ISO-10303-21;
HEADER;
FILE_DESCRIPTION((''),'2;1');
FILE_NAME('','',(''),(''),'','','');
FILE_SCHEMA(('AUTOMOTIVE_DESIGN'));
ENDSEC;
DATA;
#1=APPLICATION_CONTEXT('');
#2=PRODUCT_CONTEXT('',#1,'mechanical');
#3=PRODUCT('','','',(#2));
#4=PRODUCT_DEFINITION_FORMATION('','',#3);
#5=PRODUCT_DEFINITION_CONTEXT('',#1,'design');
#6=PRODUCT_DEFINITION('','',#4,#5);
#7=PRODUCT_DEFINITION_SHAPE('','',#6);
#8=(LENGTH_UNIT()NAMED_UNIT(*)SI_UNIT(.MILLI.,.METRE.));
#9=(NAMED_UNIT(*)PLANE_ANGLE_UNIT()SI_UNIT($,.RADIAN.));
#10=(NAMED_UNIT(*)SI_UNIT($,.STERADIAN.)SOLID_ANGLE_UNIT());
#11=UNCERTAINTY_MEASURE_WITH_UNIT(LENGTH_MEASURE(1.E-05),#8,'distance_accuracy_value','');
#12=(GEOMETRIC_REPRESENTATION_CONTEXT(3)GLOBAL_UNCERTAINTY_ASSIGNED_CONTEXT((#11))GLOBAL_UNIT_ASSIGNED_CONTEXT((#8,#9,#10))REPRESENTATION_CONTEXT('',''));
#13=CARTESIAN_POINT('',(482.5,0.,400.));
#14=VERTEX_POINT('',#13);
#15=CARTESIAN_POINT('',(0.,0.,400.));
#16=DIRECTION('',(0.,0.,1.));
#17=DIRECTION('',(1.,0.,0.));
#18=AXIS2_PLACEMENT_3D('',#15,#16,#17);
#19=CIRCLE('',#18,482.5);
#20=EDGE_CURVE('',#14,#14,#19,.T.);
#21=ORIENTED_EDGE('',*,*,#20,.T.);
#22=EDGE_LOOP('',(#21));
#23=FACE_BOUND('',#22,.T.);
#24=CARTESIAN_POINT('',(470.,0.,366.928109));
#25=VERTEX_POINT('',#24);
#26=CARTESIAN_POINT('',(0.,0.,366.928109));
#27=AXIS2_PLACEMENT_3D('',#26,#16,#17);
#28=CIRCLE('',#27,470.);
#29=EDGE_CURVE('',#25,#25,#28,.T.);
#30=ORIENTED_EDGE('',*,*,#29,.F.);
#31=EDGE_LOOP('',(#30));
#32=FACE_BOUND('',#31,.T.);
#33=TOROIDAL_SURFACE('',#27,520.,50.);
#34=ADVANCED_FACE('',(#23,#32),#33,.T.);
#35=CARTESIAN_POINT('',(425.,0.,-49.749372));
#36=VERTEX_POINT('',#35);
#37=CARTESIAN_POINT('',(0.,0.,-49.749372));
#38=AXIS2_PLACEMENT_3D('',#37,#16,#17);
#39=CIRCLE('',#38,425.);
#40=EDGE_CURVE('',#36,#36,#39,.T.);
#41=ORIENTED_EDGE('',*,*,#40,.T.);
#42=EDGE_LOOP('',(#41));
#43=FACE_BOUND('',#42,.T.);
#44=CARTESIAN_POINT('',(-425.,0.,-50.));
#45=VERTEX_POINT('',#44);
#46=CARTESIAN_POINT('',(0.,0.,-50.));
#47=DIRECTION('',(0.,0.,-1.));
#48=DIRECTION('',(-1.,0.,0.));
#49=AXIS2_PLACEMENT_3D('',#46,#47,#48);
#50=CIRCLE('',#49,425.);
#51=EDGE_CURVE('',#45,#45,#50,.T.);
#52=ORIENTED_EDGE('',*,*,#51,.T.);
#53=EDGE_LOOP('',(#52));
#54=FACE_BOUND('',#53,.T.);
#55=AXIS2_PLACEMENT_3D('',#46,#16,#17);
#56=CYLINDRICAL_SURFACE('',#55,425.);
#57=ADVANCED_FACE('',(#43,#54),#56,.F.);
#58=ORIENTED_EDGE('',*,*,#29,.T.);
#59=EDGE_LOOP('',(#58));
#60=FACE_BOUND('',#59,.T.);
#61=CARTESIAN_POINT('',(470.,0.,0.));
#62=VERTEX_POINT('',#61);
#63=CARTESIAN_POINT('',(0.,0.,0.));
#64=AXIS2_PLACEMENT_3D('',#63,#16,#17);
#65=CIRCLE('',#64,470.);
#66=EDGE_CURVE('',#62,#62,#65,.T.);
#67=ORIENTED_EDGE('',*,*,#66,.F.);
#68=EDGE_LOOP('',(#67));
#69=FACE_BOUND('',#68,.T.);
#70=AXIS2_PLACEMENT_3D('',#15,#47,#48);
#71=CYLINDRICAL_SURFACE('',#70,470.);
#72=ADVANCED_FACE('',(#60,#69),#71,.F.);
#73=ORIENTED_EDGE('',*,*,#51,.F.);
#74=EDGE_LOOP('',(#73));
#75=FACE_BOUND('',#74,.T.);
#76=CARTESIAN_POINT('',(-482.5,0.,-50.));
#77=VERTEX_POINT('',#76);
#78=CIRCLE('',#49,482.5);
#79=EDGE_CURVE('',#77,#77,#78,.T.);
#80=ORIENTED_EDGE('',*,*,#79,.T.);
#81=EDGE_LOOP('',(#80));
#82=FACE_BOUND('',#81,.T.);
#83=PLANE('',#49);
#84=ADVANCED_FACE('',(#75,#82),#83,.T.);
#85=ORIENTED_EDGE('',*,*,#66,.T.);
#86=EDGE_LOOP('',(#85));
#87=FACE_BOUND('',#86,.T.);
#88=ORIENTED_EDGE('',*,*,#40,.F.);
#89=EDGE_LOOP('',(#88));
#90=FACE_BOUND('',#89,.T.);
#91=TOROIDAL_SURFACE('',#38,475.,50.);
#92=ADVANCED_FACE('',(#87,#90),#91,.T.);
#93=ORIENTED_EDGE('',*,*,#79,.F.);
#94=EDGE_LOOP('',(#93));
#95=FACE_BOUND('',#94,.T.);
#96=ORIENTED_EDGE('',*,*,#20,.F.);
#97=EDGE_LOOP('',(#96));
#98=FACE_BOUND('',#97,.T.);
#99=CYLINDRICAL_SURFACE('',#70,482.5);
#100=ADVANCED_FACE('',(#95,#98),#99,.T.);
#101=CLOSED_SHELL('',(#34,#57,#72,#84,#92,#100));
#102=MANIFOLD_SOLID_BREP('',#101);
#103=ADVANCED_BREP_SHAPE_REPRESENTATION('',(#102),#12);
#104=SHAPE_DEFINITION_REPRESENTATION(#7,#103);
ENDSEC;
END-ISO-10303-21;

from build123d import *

# Parameters (mm, degrees)
CROQUIS1_R              = 482.5
CROQUIS1_R_2            = 470
SALIENTE_EXTRUIR1_DEPTH = 400
REDONDEO1_R             = 50
SALIENTE_EXTRUIR2_START = 50
CROQUIS2_R              = 482.5
CROQUIS2_R_2            = 425
SALIENTE_EXTRUIR2_DEPTH = 50
REDONDEO3_R             = 50


with BuildPart() as part:
    # Croquis1 → Saliente-Extruir1 (new body)
    with BuildSketch(Plane(origin=(0, 0, 0), x_dir=(0, 1, 0), z_dir=(0, 0, 1))):
        with Locations(Location((0, 0, 0), (0, 0, 270))):
            Circle(CROQUIS1_R)
        with Locations(Location((0, 0, 0), (0, 0, 270))):
            Circle(CROQUIS1_R_2, mode=Mode.SUBTRACT)
    extrude(amount=SALIENTE_EXTRUIR1_DEPTH)

    # Redondeo1
    # the kernel refuses this fillet: 50 mm, written as the material it takes off along each edge
    with BuildSketch(Plane(origin=(0, 0, 400), x_dir=(1, 0, 0), z_dir=(0, -1, 0))) as redondeo1_piece_1:
        with BuildLine():
            CenterArc((520, -33.071891388), REDONDEO1_R, 138.590377891, 41.409622109)
            Line((482.5, 0), (481.75, 0.661437828))
            ThreePointArc((481.75, 0.661437828), (476.25, 1), (470, 1))
            Line((470, 1), (469, 0))
            Line((469, 0), (469, -33.071891388))
            Line((469, -33.071891388), (470, -33.071891388))
        make_face()
    revolve(axis=Axis((0, 0, 400), (0, 0, 1)), mode=Mode.SUBTRACT)

    # Croquis2 → Saliente-Extruir2 (add)
    with BuildSketch(Plane(origin=(0, 0, 0), x_dir=(1, 0, 0), z_dir=(0, 0, -1)).offset(SALIENTE_EXTRUIR2_START)):
        with Locations(Location((0, 0, 0), (0, 0, 180))):
            Circle(CROQUIS2_R)
        with Locations(Location((0, 0, 0), (0, 0, 180))):
            Circle(CROQUIS2_R_2, mode=Mode.SUBTRACT)
    extrude(amount=-SALIENTE_EXTRUIR2_DEPTH)

    # Redondeo3
    # the kernel refuses this fillet: 50 mm, written as the material it takes off along each edge
    with BuildSketch(Plane(origin=(0, 0, 0), x_dir=(-1, 0, 0), z_dir=(0, -1, 0))) as redondeo3_piece_1:
        with BuildLine():
            CenterArc((475, 49.749371855), REDONDEO3_R, 180, 84.260829523)
            Line((470, 0), (469.9, -0.994987437))
            ThreePointArc((469.9, -0.994987437), (447.5, -1), (425, -1))
            Line((425, -1), (424, 0))
            Line((424, 0), (424, 49.749371855))
            Line((424, 49.749371855), (425, 49.749371855))
        make_face()
    revolve(axis=Axis((0, 0, 0), (0, 0, -1)), mode=Mode.SUBTRACT)


solid = part.part
